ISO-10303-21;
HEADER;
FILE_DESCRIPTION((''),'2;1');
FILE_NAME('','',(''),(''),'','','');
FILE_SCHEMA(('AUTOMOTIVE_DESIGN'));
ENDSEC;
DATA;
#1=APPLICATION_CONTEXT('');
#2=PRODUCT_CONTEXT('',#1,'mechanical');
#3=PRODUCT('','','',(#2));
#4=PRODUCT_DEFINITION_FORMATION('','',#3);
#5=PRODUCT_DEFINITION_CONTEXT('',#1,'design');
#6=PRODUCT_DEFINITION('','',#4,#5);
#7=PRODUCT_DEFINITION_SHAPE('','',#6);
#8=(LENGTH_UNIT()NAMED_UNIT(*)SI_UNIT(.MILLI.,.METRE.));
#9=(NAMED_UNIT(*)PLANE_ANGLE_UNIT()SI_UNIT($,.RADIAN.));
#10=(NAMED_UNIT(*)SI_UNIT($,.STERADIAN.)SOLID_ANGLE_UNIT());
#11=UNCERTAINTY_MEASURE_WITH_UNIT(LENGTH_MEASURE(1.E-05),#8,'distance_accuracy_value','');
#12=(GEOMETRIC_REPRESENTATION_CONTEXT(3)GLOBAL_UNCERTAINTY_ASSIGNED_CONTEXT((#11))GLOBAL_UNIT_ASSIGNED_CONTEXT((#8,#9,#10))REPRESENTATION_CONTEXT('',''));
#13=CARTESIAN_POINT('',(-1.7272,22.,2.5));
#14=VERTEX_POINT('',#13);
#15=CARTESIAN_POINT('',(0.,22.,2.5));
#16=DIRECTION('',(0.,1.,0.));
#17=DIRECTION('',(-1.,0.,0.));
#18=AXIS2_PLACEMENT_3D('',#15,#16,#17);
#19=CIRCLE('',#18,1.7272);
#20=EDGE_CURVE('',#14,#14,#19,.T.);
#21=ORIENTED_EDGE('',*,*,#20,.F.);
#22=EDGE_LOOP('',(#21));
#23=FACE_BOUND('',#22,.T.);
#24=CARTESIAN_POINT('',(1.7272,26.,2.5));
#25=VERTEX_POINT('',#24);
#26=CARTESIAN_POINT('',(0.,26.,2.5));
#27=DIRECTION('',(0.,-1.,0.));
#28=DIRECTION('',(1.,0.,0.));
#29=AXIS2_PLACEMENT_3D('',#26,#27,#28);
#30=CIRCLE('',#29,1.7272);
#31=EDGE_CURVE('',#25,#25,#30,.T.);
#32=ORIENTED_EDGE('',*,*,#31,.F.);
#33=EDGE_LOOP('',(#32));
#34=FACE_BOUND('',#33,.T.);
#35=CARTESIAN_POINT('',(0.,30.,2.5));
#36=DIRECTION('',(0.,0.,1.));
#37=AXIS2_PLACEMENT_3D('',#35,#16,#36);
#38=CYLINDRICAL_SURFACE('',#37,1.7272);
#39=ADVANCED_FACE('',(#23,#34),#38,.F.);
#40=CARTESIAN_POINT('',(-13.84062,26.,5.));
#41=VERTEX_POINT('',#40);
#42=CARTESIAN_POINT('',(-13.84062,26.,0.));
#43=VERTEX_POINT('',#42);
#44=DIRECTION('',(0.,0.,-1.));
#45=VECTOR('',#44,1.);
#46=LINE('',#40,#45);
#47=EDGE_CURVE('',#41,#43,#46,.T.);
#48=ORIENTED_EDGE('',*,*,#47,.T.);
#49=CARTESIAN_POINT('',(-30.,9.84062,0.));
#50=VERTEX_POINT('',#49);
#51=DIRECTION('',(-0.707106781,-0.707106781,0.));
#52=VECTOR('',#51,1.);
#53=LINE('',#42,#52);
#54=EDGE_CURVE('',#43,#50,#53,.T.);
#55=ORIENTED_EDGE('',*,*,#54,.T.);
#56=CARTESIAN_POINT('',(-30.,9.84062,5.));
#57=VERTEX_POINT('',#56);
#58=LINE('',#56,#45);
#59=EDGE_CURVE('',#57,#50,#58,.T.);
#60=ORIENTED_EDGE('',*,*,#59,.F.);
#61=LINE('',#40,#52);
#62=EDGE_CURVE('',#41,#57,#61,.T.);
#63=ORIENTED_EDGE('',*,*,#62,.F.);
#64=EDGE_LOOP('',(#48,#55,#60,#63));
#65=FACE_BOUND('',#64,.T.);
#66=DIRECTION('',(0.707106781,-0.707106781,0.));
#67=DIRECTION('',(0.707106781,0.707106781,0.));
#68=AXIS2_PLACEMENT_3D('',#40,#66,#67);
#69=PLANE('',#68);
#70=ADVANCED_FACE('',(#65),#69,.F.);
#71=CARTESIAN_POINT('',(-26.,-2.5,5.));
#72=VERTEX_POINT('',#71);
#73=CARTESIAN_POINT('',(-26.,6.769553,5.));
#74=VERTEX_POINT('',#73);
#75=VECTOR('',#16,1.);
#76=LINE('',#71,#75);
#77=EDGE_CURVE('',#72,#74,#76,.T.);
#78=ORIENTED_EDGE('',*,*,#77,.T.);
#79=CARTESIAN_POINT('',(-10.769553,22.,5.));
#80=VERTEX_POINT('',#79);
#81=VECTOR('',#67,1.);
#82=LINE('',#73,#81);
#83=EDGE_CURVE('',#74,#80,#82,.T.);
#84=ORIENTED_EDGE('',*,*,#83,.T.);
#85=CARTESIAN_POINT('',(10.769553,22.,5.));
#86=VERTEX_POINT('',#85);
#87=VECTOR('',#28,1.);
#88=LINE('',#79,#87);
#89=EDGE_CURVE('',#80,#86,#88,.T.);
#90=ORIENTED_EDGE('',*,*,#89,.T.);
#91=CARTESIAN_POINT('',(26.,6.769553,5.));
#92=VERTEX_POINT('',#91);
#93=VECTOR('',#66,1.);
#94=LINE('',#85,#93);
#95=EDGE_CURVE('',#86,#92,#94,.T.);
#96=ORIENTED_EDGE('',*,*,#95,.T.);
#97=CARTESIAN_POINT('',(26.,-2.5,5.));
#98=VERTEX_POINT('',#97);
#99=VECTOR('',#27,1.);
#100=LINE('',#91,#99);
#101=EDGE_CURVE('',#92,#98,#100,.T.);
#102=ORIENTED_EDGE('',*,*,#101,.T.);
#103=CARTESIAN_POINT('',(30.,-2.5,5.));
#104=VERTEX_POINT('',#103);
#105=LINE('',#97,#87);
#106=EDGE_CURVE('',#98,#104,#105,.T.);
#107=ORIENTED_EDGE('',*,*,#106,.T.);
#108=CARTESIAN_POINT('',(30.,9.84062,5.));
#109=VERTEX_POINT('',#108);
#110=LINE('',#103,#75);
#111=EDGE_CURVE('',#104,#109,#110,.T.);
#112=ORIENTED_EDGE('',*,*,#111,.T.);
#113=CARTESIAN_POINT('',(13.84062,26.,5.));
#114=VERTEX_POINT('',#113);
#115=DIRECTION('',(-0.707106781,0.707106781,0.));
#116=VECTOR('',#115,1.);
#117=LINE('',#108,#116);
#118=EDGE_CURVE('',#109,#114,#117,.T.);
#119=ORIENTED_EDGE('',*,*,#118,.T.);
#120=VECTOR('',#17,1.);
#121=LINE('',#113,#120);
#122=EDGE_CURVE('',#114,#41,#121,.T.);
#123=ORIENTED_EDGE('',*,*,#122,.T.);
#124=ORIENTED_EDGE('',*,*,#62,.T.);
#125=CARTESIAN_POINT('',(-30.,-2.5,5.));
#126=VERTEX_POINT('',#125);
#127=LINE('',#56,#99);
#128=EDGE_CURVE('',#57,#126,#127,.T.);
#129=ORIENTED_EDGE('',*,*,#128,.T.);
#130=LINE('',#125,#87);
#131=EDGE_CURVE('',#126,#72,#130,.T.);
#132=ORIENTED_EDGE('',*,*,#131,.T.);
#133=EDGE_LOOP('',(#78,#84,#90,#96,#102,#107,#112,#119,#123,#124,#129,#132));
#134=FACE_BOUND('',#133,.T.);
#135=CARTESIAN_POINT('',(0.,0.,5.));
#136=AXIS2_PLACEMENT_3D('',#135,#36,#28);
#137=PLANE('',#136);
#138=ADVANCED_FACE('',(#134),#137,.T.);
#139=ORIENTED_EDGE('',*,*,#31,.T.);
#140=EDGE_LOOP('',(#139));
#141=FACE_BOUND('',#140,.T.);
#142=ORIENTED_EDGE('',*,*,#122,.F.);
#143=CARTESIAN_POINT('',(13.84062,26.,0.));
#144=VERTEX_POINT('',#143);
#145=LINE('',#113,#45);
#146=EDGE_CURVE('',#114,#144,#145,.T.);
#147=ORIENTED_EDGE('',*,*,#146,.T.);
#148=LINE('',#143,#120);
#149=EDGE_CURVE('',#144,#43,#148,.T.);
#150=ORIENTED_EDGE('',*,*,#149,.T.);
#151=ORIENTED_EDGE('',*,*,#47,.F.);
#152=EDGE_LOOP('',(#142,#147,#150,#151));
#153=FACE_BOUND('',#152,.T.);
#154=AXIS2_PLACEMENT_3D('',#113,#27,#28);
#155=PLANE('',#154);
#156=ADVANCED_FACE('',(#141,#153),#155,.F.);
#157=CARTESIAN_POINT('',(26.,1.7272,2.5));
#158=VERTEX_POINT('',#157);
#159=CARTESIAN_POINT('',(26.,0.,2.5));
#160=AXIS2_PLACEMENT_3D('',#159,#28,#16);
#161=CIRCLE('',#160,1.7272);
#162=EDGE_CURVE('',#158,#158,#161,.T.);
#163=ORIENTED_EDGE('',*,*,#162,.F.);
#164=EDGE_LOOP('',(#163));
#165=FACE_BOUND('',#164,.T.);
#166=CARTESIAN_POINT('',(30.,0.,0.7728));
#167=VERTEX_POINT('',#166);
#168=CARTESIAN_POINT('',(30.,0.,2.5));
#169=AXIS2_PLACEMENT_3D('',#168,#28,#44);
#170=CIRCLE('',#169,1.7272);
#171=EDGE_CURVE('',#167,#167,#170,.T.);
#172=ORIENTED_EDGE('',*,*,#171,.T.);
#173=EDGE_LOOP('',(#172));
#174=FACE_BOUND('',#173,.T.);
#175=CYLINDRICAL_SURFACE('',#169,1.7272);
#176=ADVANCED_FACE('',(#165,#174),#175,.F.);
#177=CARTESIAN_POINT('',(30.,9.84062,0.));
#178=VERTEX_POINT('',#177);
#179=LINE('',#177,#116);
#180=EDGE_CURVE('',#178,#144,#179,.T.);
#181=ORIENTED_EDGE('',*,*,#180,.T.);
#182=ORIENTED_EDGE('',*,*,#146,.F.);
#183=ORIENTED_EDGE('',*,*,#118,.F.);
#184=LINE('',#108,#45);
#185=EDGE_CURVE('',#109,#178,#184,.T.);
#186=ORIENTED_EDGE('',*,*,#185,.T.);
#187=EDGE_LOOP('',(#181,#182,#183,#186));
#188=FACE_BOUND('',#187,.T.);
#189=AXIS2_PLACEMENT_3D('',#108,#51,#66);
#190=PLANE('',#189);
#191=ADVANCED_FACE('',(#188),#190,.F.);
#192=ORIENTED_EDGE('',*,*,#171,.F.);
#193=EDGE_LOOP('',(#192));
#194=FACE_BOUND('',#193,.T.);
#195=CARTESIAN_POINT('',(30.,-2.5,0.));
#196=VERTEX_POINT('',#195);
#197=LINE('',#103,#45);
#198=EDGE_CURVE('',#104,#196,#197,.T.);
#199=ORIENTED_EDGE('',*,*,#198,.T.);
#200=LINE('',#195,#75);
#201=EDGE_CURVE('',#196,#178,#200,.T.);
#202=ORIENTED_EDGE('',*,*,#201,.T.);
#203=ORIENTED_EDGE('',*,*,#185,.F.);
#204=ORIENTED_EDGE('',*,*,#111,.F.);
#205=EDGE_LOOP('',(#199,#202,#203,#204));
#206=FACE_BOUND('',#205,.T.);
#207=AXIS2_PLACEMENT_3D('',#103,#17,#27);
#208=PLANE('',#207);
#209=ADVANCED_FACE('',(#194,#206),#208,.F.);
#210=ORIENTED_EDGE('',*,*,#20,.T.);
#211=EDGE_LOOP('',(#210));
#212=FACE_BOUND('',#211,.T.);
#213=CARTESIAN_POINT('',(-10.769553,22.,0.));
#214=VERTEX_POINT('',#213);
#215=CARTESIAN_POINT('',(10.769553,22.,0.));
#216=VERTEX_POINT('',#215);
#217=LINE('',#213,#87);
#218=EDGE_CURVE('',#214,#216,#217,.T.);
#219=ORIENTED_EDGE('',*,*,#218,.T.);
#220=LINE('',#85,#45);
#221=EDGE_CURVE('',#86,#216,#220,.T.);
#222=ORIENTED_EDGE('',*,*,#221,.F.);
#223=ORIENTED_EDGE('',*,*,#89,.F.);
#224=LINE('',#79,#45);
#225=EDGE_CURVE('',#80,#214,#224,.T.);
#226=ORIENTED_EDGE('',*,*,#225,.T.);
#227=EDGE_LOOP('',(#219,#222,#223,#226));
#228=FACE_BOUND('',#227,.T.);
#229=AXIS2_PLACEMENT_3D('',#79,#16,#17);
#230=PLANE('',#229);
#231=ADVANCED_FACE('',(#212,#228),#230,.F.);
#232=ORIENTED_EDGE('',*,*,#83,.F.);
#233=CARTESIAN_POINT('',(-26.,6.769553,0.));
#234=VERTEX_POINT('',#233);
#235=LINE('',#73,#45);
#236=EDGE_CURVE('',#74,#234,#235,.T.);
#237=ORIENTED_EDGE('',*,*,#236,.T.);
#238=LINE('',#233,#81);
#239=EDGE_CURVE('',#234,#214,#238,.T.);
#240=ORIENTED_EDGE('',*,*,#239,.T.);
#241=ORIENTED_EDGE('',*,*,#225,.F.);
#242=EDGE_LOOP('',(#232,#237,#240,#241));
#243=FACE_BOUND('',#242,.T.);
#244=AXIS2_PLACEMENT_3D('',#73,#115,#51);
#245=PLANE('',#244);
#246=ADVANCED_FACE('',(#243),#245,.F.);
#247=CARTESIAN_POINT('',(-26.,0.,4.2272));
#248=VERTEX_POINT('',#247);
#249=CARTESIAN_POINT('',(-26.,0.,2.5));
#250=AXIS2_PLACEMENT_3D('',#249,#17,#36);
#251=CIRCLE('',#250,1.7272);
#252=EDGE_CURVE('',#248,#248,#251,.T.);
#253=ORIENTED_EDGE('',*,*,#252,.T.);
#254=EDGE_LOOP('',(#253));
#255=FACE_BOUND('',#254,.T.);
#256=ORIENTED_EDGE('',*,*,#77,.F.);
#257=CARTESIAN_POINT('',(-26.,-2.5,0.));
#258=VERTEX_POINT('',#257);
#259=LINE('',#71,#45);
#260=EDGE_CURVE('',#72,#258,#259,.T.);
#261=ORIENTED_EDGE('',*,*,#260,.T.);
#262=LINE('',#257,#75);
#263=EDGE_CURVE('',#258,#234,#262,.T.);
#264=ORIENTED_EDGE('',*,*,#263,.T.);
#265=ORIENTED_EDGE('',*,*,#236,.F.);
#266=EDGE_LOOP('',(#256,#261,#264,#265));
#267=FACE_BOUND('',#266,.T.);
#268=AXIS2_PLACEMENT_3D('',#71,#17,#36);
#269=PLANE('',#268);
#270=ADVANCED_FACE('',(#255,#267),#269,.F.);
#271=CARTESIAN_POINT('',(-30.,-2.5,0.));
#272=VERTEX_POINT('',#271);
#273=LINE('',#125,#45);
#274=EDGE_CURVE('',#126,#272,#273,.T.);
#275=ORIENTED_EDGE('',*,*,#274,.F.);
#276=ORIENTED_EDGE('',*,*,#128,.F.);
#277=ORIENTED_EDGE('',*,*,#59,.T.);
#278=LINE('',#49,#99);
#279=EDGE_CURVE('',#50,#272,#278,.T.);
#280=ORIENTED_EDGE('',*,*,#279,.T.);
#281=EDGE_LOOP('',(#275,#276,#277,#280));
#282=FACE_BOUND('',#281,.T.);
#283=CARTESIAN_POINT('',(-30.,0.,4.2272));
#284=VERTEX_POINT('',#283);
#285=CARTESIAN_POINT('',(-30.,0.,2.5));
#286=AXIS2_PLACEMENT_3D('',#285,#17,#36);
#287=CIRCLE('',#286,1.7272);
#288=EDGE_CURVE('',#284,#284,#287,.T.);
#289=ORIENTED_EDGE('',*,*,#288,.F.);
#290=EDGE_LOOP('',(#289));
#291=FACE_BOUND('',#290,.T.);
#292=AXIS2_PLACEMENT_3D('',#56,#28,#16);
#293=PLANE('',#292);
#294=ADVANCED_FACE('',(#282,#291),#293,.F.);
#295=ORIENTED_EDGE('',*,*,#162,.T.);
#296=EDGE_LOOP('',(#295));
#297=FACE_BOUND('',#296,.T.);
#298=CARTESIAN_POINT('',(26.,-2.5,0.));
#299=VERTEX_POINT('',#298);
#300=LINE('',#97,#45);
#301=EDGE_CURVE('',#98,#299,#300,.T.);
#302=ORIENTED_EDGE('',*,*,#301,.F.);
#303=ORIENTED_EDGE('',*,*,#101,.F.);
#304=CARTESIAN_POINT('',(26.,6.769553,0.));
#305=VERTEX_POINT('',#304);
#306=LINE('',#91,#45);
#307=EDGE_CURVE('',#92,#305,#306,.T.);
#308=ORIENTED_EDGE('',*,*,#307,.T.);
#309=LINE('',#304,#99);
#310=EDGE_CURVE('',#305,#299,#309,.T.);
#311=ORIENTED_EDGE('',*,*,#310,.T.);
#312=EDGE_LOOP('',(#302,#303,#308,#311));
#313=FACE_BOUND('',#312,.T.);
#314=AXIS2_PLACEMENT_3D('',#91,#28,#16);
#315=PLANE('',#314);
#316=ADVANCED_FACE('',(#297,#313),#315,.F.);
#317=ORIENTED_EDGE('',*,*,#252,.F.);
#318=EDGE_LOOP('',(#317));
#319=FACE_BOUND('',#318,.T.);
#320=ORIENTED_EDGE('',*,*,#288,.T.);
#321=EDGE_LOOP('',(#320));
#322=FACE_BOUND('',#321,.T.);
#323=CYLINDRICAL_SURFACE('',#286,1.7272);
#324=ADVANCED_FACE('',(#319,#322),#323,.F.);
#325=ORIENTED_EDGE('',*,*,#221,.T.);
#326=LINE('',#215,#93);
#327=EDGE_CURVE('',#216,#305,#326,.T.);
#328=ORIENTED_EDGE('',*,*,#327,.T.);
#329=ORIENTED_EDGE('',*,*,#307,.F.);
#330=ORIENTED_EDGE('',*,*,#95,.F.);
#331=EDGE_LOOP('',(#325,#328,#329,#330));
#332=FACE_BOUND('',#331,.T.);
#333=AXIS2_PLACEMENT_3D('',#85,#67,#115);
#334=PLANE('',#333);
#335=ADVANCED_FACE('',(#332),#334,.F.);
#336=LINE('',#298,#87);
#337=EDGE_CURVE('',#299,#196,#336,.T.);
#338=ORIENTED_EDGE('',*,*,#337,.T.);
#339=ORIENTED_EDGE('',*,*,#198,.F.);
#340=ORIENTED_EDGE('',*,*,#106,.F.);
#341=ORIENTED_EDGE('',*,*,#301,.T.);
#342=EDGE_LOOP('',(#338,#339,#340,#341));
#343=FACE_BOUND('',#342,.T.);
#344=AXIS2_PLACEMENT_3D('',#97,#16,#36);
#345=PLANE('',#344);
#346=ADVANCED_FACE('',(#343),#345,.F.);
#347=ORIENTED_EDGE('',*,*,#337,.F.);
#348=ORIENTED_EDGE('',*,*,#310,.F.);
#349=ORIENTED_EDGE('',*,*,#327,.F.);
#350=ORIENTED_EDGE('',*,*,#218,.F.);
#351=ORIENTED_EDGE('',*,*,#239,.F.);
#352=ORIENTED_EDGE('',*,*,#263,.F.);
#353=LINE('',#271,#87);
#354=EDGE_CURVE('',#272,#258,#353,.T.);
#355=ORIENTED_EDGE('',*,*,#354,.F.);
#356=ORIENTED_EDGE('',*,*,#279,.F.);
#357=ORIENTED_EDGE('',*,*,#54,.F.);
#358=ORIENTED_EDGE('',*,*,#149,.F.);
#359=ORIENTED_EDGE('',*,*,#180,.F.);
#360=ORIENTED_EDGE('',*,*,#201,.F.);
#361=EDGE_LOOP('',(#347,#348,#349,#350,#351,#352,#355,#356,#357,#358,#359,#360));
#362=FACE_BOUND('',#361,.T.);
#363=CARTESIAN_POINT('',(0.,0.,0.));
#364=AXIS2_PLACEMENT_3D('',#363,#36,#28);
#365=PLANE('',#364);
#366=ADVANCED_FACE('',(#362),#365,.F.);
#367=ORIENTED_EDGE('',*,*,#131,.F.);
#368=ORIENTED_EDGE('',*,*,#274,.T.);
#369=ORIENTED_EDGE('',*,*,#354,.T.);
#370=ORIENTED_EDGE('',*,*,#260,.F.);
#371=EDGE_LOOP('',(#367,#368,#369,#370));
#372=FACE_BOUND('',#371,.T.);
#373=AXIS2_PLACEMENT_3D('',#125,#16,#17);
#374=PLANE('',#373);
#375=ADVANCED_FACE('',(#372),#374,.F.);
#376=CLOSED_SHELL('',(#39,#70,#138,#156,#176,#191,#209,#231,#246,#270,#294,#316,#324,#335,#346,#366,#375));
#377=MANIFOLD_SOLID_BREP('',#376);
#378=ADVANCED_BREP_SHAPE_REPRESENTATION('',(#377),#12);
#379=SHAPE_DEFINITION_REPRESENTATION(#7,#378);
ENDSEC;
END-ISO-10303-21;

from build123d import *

# Parameters (mm, degrees)
BOSS_EXTRUDE1_DEPTH             = 5
F_29_0_136_DIAMETER_HOLE1_D     = 3.4544
F_29_0_136_DIAMETER_HOLE1_DEPTH = 4
CIRPATTERN1_START               = -30
CIRPATTERN1_OUTLINE_R           = 1.7272
CIRPATTERN1_DEPTH               = 4
CIRPATTERN1_START_2             = 22
CIRPATTERN1_2_OUTLINE_R         = 1.7272
CIRPATTERN1_2_DEPTH             = 4


# Read off the part's stored shape, not the designer's step: CirPattern1
with BuildPart() as part:
    # Sketch1 → Boss-Extrude1 (new body)
    with BuildSketch(Plane.XY):
        Polygon((-30, -2.5), (-26, -2.5), (-26, 6.769552622), (-10.769552622, 22), (10.769552622, 22), (26, 6.769552622), (26, -2.5), (30, -2.5), (30, 9.840620434), (13.840620434, 26), (-13.840620434, 26), (-30, 9.840620434), align=None)
    extrude(amount=BOSS_EXTRUDE1_DEPTH)

    # #29 (0.136) Diameter Hole1
    with Locations(Plane(origin=(30, 0, 0), x_dir=(0, 0, -1), z_dir=(1, 0, 0))):
        with Locations((-2.5, 0)):
            Hole(F_29_0_136_DIAMETER_HOLE1_D / 2, depth=F_29_0_136_DIAMETER_HOLE1_DEPTH)

    # CirPattern1 outline → CirPattern1 (cut)
    with BuildSketch(Plane.YZ.offset(CIRPATTERN1_START)):
        with Locations((0, 2.5)):
            Circle(CIRPATTERN1_OUTLINE_R)
    extrude(amount=CIRPATTERN1_DEPTH, mode=Mode.SUBTRACT)

    # CirPattern1 2 outline → CirPattern1 2 (cut)
    with BuildSketch(Plane(origin=(0, 0, 0), x_dir=(1, 0, 0), z_dir=(0, 1, 0)).offset(CIRPATTERN1_START_2)):
        with Locations((0, -2.5)):
            Circle(CIRPATTERN1_2_OUTLINE_R)
    extrude(amount=CIRPATTERN1_2_DEPTH, mode=Mode.SUBTRACT)


solid = part.part
